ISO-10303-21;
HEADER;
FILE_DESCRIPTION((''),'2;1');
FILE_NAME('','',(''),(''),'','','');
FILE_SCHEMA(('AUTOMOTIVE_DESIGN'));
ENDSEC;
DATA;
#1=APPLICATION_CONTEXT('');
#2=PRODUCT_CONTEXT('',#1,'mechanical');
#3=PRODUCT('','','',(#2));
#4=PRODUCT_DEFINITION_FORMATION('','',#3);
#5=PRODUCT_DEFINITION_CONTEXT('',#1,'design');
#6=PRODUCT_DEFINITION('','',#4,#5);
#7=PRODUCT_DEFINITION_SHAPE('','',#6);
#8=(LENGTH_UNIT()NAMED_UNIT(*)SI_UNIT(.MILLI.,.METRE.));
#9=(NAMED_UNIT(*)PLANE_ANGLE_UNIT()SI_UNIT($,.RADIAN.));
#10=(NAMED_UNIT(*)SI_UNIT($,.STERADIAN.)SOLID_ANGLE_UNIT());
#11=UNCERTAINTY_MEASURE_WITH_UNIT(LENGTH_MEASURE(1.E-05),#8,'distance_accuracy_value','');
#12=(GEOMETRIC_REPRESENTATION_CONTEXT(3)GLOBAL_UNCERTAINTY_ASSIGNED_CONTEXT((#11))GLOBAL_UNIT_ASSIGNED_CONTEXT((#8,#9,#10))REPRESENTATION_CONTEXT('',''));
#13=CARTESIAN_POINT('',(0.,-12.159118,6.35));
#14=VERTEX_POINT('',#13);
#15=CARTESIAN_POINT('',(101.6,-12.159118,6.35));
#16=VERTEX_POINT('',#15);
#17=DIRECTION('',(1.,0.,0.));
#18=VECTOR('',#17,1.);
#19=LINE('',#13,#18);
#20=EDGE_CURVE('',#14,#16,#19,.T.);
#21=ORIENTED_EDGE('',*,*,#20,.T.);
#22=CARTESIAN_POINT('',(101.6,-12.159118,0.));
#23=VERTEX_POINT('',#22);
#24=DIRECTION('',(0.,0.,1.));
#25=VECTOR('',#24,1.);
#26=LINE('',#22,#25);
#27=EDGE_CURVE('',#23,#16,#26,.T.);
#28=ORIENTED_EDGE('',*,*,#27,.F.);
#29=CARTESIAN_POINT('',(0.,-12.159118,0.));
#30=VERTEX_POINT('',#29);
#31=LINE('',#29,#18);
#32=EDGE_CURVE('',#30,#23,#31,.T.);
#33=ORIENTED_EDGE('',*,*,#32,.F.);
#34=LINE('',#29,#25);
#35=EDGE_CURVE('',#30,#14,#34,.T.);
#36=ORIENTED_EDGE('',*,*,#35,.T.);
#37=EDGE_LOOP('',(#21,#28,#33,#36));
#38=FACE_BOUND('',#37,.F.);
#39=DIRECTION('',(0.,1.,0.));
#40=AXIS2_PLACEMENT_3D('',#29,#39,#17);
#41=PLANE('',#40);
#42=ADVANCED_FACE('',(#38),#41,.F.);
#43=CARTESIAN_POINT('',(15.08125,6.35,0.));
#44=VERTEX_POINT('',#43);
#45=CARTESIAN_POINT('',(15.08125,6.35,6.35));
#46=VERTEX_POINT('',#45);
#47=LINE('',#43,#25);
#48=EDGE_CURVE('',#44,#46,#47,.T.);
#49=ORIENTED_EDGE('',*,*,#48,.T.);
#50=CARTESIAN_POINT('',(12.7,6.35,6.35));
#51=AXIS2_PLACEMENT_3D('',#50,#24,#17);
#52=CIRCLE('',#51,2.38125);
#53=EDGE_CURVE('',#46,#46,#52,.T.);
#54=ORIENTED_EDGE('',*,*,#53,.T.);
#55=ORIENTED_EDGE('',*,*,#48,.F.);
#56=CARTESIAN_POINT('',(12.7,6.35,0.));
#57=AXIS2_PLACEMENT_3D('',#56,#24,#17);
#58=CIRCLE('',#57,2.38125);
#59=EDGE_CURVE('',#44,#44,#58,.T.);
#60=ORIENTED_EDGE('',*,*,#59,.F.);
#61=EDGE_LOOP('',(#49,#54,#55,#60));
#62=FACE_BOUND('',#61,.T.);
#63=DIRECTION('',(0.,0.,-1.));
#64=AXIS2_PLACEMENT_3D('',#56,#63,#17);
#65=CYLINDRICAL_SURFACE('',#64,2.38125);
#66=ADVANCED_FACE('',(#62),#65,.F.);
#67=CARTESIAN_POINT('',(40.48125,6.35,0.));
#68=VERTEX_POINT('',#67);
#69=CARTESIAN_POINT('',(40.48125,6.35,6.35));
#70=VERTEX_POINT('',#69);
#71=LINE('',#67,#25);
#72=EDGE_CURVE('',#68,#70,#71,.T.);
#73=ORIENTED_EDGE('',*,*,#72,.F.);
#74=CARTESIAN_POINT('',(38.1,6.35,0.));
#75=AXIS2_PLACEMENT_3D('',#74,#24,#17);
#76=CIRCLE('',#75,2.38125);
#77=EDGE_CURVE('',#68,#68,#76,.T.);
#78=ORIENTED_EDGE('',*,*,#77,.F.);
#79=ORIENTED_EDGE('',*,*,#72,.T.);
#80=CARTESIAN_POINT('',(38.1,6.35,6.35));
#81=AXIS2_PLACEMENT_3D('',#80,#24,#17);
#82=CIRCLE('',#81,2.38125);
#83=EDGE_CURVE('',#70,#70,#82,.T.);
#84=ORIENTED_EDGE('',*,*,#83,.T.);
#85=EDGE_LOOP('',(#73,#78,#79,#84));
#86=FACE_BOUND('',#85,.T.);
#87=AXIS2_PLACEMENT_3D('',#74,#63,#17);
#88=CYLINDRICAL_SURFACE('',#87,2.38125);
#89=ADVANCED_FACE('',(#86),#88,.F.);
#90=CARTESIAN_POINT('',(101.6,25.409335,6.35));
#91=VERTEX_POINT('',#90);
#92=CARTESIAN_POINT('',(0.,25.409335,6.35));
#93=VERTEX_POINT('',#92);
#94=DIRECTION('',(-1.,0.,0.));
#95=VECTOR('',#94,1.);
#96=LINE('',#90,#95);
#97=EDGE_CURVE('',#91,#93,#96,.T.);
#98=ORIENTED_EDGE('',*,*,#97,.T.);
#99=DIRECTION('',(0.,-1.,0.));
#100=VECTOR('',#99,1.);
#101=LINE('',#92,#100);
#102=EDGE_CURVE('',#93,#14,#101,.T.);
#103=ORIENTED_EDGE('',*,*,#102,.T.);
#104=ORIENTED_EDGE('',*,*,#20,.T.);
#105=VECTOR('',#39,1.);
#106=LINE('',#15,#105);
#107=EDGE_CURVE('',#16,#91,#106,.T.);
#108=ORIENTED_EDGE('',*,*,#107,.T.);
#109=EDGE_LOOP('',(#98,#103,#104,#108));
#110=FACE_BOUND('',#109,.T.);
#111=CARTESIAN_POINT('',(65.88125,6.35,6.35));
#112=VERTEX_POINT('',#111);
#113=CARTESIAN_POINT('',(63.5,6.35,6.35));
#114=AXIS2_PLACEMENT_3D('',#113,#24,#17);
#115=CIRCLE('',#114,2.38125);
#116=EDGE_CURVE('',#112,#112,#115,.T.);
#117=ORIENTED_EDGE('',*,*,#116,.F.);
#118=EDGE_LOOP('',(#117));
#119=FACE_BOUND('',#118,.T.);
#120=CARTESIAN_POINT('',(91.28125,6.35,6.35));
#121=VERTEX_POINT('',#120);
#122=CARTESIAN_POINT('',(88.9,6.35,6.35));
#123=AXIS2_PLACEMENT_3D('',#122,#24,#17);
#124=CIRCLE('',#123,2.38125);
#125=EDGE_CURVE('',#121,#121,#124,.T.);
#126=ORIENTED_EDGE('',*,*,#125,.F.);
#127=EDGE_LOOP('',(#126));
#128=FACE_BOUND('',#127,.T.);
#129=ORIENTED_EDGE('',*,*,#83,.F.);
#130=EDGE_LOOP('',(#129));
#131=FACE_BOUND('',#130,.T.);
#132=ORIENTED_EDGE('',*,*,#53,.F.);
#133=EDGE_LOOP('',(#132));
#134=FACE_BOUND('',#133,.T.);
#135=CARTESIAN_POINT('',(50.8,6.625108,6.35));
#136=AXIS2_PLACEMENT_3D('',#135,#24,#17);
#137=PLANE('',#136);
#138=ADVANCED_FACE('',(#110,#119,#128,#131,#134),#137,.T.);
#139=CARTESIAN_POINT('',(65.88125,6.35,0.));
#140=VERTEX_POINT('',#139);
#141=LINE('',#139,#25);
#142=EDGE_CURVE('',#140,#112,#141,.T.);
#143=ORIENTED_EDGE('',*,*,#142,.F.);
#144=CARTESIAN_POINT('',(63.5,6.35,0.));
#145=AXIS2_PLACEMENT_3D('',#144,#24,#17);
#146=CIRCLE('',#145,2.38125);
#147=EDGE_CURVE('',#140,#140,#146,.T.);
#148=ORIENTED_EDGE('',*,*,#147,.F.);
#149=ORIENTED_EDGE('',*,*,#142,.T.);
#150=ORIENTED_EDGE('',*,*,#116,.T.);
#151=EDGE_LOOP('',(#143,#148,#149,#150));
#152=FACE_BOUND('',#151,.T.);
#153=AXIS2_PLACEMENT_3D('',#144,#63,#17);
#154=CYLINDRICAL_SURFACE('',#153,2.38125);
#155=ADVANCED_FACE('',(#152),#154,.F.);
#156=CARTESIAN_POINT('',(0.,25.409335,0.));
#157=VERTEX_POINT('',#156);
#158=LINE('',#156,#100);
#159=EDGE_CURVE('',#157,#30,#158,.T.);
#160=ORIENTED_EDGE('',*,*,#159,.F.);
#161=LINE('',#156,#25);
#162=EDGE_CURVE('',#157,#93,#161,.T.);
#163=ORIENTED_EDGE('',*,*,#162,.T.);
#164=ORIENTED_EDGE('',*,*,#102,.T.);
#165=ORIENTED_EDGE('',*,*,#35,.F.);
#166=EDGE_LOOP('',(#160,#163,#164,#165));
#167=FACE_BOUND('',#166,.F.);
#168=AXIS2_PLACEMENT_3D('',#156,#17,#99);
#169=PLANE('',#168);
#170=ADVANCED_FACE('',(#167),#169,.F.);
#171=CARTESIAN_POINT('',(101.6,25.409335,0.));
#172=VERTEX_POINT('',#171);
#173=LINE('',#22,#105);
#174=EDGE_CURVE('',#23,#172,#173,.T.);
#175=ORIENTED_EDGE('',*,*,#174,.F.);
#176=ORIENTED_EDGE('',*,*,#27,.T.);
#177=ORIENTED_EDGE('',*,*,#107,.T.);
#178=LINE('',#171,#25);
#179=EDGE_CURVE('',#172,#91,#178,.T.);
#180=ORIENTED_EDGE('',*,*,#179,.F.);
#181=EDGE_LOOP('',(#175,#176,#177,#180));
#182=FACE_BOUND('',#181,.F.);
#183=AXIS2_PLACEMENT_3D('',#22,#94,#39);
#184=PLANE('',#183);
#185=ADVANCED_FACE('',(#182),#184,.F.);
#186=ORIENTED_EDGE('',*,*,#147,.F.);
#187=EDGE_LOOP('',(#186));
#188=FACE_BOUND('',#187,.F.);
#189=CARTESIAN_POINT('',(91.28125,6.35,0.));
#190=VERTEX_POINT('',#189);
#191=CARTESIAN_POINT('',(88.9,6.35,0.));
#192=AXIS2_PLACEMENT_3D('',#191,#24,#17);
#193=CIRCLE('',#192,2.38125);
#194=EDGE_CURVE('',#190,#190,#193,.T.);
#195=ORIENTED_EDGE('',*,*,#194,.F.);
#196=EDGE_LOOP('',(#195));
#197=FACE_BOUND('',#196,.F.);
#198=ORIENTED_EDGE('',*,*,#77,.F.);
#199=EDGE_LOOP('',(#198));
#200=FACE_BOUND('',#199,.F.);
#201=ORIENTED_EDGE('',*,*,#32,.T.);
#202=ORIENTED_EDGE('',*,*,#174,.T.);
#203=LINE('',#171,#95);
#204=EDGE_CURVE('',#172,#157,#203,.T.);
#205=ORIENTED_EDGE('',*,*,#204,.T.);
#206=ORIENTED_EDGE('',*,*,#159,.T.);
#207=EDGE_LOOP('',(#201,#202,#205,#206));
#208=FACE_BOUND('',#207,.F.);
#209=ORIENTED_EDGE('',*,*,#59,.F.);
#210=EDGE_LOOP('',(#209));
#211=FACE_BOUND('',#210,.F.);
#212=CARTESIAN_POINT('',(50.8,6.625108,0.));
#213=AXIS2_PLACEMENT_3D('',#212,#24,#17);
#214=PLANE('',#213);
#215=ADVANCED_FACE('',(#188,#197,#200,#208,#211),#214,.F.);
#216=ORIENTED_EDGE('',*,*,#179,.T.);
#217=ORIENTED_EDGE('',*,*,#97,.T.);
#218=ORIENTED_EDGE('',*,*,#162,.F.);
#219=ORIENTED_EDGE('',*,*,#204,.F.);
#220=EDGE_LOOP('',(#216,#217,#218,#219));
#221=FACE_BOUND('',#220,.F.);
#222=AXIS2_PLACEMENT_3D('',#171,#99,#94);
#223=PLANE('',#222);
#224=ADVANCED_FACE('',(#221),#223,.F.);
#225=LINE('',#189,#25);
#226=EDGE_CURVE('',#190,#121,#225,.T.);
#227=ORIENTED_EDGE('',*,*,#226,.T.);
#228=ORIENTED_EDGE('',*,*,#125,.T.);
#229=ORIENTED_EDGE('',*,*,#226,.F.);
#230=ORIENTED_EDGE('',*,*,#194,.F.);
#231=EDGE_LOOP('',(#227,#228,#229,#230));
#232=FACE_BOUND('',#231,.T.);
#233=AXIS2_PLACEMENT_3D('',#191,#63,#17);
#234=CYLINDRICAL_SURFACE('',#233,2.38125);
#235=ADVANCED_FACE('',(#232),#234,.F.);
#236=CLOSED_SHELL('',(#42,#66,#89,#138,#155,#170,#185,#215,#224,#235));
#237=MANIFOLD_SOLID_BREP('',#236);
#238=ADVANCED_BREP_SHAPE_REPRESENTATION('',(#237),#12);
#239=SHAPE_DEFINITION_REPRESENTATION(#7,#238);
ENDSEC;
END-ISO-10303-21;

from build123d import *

# Parameters (mm, degrees)
F1_R     = 2.38125
F2_DEPTH = 6.35


# Not quite as in the source:
# - a length typed as a fraction of an inch, garbled in the dataset ("3 / 203.2 mm" for 3/8 in), is restored


with BuildPart() as f2:
    # F1 (on Top) → F2 (new body)
    with BuildSketch(Plane.XY):
        Polygon((101.6, 25.4093351929), (0, 25.4093351929), (0, 0), (0, -12.1591184288), (101.6, -12.1591184288), (101.6, 0.0093351929), align=None)
        with Locations((12.7, 6.35)):
            Circle(F1_R, mode=Mode.SUBTRACT)
        with Locations((38.1, 6.35)):
            Circle(F1_R, mode=Mode.SUBTRACT)
        with Locations((63.5, 6.35)):
            Circle(F1_R, mode=Mode.SUBTRACT)
        with Locations((88.9, 6.35)):
            Circle(F1_R, mode=Mode.SUBTRACT)
    extrude(amount=F2_DEPTH)


solid = f2.part
